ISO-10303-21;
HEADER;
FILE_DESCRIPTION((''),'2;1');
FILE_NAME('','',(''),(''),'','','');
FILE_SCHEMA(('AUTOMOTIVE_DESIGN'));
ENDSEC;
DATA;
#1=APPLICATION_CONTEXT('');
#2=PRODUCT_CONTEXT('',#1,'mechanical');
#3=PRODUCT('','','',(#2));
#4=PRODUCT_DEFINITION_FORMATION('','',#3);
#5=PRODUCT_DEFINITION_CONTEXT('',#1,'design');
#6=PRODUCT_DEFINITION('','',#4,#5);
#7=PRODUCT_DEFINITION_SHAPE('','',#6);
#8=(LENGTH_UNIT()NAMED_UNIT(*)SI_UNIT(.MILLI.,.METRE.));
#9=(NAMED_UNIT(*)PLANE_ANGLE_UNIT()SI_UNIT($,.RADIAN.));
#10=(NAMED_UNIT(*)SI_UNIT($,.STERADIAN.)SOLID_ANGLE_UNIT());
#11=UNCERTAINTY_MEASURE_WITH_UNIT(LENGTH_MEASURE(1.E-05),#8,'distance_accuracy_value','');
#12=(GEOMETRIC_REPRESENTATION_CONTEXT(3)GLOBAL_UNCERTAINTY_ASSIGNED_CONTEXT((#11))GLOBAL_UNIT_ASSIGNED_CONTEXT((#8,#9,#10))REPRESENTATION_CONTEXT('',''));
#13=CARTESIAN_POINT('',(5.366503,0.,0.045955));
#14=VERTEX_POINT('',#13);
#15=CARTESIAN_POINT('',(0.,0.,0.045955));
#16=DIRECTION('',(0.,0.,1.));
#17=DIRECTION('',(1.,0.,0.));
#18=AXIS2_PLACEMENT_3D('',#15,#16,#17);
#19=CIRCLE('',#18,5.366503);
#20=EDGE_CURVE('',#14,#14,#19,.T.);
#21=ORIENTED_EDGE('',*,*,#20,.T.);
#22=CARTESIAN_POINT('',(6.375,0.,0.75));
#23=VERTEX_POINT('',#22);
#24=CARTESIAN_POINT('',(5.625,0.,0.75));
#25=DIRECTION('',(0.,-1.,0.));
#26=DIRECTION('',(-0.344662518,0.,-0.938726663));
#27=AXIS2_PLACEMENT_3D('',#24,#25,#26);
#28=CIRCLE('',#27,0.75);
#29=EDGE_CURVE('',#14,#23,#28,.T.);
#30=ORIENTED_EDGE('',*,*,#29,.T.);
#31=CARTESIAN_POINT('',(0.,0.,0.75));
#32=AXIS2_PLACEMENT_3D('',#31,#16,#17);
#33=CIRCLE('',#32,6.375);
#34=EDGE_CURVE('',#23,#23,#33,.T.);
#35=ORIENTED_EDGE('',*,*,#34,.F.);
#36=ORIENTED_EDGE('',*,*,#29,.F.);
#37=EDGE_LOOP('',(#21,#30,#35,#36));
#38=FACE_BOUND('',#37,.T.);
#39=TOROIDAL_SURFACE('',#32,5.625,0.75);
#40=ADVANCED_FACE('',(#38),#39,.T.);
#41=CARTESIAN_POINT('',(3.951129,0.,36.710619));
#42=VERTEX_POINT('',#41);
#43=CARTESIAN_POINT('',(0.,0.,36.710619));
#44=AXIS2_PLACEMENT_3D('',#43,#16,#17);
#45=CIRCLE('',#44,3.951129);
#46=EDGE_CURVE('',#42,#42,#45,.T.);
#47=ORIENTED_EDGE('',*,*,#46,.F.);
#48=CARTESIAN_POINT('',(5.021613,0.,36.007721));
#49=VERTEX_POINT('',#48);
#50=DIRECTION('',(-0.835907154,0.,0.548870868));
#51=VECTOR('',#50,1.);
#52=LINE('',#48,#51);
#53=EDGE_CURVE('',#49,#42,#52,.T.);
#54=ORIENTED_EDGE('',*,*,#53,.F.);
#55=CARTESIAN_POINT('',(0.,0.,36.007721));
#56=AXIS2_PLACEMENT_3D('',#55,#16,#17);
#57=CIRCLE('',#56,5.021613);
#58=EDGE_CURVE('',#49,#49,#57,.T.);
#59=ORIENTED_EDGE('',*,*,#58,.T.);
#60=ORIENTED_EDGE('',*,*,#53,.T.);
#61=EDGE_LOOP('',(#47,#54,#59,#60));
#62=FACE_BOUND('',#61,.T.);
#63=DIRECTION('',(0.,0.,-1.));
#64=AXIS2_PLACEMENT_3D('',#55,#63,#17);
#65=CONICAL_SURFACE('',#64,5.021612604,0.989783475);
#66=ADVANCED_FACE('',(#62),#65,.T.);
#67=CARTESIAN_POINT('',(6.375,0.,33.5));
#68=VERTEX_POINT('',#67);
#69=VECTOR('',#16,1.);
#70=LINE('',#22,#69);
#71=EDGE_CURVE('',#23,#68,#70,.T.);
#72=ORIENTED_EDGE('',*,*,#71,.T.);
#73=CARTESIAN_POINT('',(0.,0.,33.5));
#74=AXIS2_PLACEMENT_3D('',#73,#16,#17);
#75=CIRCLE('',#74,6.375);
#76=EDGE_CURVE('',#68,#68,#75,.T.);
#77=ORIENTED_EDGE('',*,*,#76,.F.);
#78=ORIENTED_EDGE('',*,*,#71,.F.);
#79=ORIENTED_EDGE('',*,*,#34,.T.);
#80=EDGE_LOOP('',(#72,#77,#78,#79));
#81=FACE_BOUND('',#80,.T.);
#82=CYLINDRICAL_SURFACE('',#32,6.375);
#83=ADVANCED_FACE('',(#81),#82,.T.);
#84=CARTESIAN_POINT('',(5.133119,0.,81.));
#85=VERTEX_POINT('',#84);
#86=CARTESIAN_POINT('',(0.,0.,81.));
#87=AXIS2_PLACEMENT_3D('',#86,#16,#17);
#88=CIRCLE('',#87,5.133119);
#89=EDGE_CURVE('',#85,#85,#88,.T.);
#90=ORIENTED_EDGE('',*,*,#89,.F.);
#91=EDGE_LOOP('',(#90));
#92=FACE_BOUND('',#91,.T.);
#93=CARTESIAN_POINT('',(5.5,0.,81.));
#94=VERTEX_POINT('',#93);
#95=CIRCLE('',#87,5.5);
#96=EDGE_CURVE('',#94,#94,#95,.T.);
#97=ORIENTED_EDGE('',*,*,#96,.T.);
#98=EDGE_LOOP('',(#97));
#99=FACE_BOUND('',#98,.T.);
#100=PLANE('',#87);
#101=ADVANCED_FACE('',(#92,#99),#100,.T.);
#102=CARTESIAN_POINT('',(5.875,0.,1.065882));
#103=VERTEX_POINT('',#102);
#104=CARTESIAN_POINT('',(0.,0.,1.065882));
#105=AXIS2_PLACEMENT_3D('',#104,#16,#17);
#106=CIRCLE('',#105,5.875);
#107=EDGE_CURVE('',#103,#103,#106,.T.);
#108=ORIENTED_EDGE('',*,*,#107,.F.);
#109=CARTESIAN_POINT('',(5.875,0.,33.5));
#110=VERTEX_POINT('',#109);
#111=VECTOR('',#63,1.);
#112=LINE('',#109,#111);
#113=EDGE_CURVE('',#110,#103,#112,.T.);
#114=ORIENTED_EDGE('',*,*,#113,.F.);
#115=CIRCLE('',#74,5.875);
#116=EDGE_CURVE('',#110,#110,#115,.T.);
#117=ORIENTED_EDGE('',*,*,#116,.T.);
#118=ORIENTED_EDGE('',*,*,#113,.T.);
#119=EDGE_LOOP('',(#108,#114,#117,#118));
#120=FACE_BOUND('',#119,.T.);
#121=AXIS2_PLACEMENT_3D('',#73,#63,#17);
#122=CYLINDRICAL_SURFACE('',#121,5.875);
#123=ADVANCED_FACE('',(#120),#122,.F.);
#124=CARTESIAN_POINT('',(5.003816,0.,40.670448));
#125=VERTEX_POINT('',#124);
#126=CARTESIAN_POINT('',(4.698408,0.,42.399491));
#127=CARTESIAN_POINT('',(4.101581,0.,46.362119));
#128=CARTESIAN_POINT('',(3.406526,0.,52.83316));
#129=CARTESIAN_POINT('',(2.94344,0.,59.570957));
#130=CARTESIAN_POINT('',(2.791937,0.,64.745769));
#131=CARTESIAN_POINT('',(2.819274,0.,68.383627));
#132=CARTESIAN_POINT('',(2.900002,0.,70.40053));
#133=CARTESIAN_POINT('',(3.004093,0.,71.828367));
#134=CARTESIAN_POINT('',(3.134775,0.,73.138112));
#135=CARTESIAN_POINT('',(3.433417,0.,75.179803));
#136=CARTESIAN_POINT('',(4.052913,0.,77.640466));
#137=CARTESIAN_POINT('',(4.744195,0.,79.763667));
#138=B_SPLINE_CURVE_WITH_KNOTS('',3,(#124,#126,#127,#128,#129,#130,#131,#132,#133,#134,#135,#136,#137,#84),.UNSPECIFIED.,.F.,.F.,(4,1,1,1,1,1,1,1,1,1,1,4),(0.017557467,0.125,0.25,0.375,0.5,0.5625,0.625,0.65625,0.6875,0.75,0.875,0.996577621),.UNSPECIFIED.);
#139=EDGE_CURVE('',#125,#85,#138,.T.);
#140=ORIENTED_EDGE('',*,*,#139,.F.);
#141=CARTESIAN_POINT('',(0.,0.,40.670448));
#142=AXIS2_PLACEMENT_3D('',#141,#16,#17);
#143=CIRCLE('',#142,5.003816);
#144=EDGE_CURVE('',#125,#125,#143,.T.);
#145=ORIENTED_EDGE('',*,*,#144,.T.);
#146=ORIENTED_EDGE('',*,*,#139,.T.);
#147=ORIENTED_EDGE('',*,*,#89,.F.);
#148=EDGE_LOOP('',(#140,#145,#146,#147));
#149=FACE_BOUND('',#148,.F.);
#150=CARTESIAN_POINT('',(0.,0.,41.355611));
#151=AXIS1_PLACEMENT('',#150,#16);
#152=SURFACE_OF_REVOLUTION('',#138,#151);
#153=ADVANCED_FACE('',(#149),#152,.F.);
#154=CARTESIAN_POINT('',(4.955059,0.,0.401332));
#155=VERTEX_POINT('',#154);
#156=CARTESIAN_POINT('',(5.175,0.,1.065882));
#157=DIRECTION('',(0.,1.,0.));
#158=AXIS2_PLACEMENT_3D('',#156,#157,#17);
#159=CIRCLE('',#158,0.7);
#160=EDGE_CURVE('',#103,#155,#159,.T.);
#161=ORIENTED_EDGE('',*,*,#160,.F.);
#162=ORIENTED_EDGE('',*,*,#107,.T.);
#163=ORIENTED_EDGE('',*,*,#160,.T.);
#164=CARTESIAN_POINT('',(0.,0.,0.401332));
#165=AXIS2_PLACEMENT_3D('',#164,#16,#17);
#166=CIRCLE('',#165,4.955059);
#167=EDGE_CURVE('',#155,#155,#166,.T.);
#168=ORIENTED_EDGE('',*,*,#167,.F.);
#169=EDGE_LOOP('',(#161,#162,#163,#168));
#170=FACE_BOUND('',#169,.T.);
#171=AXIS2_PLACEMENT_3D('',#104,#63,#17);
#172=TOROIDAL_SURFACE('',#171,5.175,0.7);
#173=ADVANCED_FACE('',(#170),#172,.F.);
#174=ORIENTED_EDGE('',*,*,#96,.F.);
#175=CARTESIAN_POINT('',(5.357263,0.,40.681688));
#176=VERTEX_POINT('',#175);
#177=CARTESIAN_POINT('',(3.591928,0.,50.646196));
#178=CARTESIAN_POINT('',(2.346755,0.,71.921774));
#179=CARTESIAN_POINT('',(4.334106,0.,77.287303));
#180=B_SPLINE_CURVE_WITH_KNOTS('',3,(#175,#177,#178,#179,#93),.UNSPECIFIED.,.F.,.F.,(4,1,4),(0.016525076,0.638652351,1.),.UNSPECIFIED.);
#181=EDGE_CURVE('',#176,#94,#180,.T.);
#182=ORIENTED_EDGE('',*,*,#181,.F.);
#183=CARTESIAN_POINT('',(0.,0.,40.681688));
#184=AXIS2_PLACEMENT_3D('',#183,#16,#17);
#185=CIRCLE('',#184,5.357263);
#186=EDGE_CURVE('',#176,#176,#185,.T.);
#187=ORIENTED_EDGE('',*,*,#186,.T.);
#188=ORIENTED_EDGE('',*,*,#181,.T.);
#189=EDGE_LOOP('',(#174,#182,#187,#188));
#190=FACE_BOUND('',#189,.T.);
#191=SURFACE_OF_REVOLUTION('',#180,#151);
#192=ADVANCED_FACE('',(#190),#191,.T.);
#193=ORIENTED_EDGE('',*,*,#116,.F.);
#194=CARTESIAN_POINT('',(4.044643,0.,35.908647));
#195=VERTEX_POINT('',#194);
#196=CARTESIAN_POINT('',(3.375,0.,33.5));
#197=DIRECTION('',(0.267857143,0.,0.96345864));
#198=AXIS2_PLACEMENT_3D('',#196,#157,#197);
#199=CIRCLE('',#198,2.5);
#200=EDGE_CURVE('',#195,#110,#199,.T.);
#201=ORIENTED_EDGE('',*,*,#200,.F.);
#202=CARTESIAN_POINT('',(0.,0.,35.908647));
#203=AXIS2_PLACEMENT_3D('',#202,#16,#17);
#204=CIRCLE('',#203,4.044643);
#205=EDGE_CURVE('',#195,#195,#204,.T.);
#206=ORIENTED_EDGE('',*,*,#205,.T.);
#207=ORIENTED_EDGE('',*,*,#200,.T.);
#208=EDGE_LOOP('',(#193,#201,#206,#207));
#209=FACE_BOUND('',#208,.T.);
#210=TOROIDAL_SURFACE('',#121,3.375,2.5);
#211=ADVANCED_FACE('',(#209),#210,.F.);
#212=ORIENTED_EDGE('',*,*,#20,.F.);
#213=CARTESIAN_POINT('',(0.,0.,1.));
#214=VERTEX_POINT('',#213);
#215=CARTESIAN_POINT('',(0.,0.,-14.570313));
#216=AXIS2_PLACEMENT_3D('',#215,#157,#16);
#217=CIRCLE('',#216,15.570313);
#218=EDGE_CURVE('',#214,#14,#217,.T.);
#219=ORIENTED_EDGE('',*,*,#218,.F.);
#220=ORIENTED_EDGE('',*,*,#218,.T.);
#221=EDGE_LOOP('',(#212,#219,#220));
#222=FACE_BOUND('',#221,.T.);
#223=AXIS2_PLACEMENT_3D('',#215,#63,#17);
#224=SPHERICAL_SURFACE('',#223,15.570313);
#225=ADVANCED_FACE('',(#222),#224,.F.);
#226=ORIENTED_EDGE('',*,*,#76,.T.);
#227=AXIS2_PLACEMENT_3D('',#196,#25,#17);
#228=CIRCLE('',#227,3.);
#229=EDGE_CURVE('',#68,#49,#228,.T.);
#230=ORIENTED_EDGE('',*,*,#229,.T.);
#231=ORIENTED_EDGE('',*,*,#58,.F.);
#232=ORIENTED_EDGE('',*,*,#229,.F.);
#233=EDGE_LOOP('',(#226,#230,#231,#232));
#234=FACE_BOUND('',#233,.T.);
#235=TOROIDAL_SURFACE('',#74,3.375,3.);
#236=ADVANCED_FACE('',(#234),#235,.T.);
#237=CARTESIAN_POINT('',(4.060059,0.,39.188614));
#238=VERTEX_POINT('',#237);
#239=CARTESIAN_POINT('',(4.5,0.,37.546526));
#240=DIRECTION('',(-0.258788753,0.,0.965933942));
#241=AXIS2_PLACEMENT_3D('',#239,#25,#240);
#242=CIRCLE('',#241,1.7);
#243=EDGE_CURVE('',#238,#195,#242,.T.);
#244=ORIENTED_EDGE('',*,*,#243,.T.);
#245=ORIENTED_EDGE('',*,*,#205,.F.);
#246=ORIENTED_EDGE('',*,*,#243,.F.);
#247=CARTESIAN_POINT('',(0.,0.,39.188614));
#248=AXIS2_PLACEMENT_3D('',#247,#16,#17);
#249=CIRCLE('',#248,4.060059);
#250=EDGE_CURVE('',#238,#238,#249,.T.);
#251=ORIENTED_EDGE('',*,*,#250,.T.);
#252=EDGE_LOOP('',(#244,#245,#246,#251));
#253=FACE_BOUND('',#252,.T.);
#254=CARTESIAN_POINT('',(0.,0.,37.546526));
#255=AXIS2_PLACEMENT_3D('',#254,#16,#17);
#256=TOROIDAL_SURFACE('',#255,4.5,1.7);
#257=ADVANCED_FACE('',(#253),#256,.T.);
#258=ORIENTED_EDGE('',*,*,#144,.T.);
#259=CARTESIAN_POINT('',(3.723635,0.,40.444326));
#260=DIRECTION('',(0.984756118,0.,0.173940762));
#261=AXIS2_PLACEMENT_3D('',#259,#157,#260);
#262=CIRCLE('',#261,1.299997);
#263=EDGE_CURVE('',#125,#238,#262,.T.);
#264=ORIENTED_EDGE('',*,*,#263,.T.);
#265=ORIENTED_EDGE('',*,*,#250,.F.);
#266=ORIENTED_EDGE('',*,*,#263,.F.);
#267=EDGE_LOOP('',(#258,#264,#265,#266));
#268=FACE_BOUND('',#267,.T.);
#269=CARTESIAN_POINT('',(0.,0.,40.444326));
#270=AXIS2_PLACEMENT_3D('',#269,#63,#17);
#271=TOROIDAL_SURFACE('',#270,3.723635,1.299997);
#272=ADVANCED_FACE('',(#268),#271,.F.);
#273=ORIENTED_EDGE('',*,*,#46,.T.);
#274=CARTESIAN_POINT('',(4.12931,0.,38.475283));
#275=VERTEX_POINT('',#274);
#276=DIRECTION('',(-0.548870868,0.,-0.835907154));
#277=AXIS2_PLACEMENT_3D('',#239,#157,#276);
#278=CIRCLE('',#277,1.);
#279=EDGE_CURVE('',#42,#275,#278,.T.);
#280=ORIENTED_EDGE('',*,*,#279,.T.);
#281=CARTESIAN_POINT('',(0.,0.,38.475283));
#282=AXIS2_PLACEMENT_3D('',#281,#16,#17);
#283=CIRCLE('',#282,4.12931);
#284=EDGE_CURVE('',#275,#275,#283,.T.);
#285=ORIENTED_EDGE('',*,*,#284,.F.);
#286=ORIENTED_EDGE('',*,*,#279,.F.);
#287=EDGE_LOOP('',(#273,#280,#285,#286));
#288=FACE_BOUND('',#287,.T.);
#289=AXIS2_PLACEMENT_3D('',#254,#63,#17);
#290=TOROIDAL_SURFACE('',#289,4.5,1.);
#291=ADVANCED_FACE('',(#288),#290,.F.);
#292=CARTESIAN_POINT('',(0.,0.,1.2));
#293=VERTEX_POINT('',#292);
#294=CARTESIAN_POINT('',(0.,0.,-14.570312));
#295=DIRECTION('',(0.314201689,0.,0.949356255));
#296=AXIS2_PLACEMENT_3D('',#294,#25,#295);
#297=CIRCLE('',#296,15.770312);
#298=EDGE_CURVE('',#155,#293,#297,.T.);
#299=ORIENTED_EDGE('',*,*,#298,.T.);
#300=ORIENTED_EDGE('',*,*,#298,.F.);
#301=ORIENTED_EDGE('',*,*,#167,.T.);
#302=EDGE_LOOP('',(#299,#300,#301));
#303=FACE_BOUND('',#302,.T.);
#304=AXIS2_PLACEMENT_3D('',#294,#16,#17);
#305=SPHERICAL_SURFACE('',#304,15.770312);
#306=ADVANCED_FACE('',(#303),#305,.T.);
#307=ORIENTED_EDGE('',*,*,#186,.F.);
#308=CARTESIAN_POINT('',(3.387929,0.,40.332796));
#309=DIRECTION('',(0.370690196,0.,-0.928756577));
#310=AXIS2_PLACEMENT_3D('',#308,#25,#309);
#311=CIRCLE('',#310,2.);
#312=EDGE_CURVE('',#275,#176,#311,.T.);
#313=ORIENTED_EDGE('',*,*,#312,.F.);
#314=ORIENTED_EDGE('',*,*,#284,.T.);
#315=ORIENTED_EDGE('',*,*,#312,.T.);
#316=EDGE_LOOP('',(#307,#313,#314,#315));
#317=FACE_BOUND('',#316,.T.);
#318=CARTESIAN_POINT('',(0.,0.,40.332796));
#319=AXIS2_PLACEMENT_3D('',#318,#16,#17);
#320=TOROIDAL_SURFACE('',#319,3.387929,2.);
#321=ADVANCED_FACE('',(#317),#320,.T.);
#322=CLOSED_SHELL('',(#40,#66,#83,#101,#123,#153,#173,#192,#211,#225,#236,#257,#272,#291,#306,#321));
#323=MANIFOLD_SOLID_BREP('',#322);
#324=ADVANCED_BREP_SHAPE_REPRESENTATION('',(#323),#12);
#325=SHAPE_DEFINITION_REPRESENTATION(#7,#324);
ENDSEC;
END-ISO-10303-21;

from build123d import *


# Not quite as in the source:
# - ends of sketch curves that miss each other by under 0.0002 mm in the source are joined
# - the dataset's text gives a spline's control points without its knots; the knots are read off the source's solid


with BuildPart() as f1:
    # F0 (on Front) → F1 (revolve)
    with BuildSketch(Plane.XZ):
        with BuildLine():
            ThreePointArc((5.3665031115, 0.0459550024), (6.0543176759, 0.1350314372), (6.375, 0.75))
            Line((6.375, 0.75), (6.375, 33.5))
            ThreePointArc((6.375, 33.5), (6.0150603981, 34.9248091431), (5.0216126038, 36.0077214624))
            Line((5.0216126038, 36.0077214624), (3.9511291321, 36.7106191339))
            ThreePointArc((3.9511291321, 36.7106191339), (3.5050589675, 37.646986936), (4.129309804, 38.4752828647))
            ThreePointArc((4.129309804, 38.4752828647), (5.135512873, 39.3601953563), (5.3572629788, 40.6816875524))
            add(Edge.make_bspline(
                [(5.3572629788, 40.6816875524), (3.5919283633, 50.646196206), (2.3467552195, 71.9217737234), (4.3341060529, 77.2873032352), (5.5, 81)],
                knots=[0.0165250757, 0.0165250757, 0.0165250757, 0.0165250757, 0.638652351, 1, 1, 1, 1], degree=3))
            Line((5.5, 81), (5.1331190125, 81))
            add(Edge.make_bspline(
                [(5.0038158008, 40.6704484598), (4.6984079165, 42.3994911801), (4.1015811021, 46.3621189154), (3.4065256445, 52.8331604138), (2.9434400764, 59.5709572319), (2.7919372258, 64.7457686722), (2.8192744411, 68.3836267885), (2.9000021009, 70.4005298819), (3.0040929662, 71.8283670538), (3.1347752343, 73.1381118153), (3.4334170243, 75.1798025444), (4.0529129834, 77.6404662934), (4.7441946947, 79.7636672453), (5.1331190125, 81)],
                knots=[0.0175574673, 0.0175574673, 0.0175574673, 0.0175574673, 0.125, 0.25, 0.375, 0.5, 0.5625, 0.625, 0.65625, 0.6875, 0.75, 0.875, 0.996577621, 0.996577621, 0.996577621, 0.996577621], degree=3))
            ThreePointArc((5.0038158008, 40.6704484598), (4.8201347615, 39.74598328), (4.0600591191, 39.1886139901))
            ThreePointArc((4.0600591191, 39.1886139901), (2.8000187772, 37.554516415), (4.0446428571, 35.9086466))
            ThreePointArc((4.0446428571, 35.9086466), (5.3654907866, 35.0125959238), (5.875, 33.5))
            Line((5.875, 33.5), (5.875, 1.0658816932))
            ThreePointArc((5.875, 1.0658816932), (5.5849031426, 0.4984493944), (4.9550588179, 0.4013323147))
            ThreePointArc((4.9550588179, 0.4013323147), (2.5095058259, 0.9990528325), (0, 1.2))
            Line((0, 1.2), (0, 1))
            ThreePointArc((0, 1), (2.7253237195, 0.759633422), (5.3665031115, 0.0459550024))
        make_face()
    revolve(axis=Axis((0, 0, 41.3556105854), (0, 0, 1)))


solid = f1.part
